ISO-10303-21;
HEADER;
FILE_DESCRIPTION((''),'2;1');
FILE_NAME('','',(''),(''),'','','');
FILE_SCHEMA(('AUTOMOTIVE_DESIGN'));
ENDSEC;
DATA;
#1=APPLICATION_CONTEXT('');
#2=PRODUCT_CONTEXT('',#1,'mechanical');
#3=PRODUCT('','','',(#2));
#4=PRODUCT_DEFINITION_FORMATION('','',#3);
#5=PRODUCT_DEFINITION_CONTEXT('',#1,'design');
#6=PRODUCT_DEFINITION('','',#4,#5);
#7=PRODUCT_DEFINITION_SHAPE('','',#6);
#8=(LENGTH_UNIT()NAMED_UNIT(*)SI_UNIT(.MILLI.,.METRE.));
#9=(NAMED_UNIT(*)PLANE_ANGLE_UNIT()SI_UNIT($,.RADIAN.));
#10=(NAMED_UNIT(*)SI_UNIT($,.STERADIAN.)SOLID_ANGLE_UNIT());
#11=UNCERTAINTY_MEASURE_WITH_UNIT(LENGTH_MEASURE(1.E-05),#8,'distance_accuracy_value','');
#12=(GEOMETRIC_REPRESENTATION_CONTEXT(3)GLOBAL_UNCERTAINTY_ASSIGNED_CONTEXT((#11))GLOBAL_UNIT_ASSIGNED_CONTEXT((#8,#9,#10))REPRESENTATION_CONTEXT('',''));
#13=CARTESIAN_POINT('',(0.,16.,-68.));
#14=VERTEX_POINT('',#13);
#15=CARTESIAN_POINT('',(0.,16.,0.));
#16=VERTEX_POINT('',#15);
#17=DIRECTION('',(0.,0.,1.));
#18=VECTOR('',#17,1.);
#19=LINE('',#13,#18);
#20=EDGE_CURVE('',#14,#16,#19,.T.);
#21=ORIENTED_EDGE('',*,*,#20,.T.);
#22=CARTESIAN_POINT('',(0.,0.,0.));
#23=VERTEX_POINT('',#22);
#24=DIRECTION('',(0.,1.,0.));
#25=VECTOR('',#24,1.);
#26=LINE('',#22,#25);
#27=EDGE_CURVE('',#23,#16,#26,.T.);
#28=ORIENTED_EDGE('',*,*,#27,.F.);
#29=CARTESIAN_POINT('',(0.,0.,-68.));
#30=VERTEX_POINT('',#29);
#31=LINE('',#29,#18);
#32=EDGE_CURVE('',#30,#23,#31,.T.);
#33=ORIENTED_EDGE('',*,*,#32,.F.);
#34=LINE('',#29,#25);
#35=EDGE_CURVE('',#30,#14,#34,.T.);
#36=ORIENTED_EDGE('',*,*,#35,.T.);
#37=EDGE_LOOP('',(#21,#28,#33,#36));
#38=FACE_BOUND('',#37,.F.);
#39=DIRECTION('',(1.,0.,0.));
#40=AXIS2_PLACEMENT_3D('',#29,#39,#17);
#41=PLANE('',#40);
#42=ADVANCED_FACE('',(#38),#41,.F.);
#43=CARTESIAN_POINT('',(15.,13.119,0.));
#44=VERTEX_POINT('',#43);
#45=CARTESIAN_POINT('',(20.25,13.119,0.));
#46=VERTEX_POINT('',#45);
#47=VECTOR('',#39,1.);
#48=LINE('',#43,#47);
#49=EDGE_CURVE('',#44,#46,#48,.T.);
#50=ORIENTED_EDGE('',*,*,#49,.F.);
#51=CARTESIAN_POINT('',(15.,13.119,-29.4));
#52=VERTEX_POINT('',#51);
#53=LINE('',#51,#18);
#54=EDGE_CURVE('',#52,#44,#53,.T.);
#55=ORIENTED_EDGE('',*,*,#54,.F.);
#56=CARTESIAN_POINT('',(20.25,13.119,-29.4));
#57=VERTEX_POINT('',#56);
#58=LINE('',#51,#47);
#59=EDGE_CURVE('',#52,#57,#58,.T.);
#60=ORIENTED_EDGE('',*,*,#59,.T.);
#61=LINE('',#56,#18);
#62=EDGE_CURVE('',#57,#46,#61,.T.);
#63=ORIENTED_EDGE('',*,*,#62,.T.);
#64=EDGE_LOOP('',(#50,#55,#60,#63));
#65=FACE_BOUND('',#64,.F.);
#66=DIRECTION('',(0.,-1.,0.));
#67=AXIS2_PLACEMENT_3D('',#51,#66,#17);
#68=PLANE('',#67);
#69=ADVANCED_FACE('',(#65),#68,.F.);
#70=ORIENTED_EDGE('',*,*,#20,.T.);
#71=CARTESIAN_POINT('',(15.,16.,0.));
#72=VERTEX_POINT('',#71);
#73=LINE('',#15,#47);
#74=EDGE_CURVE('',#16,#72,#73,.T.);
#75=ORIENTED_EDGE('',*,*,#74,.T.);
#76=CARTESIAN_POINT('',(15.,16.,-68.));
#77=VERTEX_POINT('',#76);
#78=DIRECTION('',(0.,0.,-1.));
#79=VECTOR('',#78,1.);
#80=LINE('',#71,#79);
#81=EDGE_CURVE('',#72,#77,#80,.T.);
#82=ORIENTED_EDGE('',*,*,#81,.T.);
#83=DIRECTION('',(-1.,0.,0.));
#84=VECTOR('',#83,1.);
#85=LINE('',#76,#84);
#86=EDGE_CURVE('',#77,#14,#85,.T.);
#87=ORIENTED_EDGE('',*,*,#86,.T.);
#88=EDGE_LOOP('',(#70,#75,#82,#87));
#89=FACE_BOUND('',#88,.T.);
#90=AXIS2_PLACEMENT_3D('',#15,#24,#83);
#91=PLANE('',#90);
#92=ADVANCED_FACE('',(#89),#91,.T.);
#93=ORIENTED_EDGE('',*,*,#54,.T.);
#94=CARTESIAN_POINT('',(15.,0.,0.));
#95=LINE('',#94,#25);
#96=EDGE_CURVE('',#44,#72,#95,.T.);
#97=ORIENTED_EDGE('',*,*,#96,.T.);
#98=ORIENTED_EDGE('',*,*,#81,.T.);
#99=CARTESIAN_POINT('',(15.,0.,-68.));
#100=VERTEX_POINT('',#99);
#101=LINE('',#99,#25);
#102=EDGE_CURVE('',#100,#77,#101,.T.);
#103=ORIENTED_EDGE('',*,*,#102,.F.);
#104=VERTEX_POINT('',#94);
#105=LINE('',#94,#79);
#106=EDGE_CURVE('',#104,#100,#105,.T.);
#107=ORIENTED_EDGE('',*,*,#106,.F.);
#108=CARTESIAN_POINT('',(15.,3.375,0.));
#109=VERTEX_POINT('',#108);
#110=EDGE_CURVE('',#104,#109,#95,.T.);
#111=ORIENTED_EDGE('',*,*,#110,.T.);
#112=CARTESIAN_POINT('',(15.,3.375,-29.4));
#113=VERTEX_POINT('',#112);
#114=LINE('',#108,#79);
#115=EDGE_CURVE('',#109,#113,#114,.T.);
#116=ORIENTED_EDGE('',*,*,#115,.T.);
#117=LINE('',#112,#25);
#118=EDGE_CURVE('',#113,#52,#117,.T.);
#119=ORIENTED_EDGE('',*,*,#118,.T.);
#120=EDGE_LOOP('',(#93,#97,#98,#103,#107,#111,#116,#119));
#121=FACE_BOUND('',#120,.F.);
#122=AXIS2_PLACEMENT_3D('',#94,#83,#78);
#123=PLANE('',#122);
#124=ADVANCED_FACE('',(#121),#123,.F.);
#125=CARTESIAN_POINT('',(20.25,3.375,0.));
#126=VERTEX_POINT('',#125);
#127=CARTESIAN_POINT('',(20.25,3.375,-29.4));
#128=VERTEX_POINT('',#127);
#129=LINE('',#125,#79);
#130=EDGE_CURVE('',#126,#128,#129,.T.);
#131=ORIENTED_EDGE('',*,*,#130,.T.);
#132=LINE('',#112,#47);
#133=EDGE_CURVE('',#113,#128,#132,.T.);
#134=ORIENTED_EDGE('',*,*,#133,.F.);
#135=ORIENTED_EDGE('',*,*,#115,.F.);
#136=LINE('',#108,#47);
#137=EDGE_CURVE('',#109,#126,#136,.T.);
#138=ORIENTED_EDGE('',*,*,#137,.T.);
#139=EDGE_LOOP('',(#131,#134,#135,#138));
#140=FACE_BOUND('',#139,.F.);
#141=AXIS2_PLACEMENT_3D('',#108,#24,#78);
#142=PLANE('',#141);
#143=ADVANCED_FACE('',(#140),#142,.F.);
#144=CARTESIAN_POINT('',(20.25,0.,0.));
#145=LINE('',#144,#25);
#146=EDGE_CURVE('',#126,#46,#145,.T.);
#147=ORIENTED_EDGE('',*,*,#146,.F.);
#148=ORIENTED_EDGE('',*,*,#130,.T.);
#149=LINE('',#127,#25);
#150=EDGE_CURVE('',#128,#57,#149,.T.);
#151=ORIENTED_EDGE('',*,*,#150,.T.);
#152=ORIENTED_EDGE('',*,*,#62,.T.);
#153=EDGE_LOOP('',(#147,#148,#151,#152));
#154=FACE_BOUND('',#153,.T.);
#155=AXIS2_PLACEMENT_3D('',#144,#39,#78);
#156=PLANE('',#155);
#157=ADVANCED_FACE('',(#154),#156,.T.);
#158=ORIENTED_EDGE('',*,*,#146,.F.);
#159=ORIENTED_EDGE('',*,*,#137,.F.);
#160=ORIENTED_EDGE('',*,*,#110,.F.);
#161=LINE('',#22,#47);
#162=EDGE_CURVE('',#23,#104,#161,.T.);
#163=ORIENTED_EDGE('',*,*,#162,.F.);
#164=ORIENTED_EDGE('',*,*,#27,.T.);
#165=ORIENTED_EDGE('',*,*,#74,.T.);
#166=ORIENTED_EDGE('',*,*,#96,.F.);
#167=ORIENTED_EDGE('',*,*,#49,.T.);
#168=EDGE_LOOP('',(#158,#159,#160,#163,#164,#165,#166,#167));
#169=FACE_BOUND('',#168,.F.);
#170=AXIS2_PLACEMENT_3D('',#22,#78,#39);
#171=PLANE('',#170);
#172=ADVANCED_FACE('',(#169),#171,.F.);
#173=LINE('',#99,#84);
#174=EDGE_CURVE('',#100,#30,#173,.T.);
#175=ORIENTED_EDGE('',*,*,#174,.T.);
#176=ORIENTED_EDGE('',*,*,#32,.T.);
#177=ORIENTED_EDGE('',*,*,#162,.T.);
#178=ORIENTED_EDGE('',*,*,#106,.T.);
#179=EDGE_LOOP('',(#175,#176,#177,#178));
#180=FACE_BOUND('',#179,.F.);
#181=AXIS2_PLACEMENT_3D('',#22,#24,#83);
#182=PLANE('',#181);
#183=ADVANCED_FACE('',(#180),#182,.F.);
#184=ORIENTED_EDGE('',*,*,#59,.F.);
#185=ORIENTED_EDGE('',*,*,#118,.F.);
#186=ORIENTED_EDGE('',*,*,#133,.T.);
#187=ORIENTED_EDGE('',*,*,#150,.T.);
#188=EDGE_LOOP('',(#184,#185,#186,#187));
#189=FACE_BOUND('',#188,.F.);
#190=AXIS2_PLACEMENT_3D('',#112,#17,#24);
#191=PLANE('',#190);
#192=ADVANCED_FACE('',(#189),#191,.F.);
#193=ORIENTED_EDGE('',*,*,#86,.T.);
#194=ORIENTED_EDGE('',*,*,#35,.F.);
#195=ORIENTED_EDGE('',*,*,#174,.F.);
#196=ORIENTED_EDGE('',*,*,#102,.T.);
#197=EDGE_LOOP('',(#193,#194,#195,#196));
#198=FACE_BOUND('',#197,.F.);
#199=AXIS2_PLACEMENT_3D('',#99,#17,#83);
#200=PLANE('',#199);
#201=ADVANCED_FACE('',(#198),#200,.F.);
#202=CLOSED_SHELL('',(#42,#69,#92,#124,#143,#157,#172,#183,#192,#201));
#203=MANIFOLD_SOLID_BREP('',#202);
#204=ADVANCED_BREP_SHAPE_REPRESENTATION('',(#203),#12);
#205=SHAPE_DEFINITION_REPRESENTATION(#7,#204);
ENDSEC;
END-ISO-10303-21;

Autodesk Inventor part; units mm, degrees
ref_plane "YZ Plane" through (0, 0, 0) normal (1, 0, 0) x (0, 1, 0)
ref_plane "XZ Plane" through (0, 0, 0) normal (0, 1, 0) x (-1, 0, 0)
ref_plane "XY Plane" through (0, 0, 0) normal (0, 0, 1) x (1, 0, 0)
sketch "Sketch1" plane through (0, 0, 0) normal (0, 1, 0) x (-1, 0, 0)
  line L0 (0, 0) -> (-15, 0)
  line L1 (-15, 0) -> (-15, -68)
  line L2 (-15, -68) -> (0, -68)
  line L3 (0, -68) -> (0, 0)
  dimension "d0" = 15
  dimension "d1" = 68
extrude "Extrusion1" add sketch "Sketch1" along normal blind 16
sketch "Sketch2" plane through (15, 0, 0) normal (1, 0, 0) x (0, 0, -1)
  line L0 (34.4, 3.375) -> (29.4, 3.375) projected
  line L1 (34.4, 13.119) -> (29.4, 13.119) projected
  line L2 (0, 0) -> (0, 16) projected
  line L3 (29.4, 13.119) -> (0, 13.119)
  line L4 (0, 13.119) -> (0, 3.375)
  line L5 (0, 3.375) -> (29.4, 3.375)
  line L6 (29.4, 3.375) -> (29.4, 13.119)
extrude "Extrusion2" add sketch "Sketch2" along normal up to surface (5.25 mm away)
properties part number "smolLipo"
